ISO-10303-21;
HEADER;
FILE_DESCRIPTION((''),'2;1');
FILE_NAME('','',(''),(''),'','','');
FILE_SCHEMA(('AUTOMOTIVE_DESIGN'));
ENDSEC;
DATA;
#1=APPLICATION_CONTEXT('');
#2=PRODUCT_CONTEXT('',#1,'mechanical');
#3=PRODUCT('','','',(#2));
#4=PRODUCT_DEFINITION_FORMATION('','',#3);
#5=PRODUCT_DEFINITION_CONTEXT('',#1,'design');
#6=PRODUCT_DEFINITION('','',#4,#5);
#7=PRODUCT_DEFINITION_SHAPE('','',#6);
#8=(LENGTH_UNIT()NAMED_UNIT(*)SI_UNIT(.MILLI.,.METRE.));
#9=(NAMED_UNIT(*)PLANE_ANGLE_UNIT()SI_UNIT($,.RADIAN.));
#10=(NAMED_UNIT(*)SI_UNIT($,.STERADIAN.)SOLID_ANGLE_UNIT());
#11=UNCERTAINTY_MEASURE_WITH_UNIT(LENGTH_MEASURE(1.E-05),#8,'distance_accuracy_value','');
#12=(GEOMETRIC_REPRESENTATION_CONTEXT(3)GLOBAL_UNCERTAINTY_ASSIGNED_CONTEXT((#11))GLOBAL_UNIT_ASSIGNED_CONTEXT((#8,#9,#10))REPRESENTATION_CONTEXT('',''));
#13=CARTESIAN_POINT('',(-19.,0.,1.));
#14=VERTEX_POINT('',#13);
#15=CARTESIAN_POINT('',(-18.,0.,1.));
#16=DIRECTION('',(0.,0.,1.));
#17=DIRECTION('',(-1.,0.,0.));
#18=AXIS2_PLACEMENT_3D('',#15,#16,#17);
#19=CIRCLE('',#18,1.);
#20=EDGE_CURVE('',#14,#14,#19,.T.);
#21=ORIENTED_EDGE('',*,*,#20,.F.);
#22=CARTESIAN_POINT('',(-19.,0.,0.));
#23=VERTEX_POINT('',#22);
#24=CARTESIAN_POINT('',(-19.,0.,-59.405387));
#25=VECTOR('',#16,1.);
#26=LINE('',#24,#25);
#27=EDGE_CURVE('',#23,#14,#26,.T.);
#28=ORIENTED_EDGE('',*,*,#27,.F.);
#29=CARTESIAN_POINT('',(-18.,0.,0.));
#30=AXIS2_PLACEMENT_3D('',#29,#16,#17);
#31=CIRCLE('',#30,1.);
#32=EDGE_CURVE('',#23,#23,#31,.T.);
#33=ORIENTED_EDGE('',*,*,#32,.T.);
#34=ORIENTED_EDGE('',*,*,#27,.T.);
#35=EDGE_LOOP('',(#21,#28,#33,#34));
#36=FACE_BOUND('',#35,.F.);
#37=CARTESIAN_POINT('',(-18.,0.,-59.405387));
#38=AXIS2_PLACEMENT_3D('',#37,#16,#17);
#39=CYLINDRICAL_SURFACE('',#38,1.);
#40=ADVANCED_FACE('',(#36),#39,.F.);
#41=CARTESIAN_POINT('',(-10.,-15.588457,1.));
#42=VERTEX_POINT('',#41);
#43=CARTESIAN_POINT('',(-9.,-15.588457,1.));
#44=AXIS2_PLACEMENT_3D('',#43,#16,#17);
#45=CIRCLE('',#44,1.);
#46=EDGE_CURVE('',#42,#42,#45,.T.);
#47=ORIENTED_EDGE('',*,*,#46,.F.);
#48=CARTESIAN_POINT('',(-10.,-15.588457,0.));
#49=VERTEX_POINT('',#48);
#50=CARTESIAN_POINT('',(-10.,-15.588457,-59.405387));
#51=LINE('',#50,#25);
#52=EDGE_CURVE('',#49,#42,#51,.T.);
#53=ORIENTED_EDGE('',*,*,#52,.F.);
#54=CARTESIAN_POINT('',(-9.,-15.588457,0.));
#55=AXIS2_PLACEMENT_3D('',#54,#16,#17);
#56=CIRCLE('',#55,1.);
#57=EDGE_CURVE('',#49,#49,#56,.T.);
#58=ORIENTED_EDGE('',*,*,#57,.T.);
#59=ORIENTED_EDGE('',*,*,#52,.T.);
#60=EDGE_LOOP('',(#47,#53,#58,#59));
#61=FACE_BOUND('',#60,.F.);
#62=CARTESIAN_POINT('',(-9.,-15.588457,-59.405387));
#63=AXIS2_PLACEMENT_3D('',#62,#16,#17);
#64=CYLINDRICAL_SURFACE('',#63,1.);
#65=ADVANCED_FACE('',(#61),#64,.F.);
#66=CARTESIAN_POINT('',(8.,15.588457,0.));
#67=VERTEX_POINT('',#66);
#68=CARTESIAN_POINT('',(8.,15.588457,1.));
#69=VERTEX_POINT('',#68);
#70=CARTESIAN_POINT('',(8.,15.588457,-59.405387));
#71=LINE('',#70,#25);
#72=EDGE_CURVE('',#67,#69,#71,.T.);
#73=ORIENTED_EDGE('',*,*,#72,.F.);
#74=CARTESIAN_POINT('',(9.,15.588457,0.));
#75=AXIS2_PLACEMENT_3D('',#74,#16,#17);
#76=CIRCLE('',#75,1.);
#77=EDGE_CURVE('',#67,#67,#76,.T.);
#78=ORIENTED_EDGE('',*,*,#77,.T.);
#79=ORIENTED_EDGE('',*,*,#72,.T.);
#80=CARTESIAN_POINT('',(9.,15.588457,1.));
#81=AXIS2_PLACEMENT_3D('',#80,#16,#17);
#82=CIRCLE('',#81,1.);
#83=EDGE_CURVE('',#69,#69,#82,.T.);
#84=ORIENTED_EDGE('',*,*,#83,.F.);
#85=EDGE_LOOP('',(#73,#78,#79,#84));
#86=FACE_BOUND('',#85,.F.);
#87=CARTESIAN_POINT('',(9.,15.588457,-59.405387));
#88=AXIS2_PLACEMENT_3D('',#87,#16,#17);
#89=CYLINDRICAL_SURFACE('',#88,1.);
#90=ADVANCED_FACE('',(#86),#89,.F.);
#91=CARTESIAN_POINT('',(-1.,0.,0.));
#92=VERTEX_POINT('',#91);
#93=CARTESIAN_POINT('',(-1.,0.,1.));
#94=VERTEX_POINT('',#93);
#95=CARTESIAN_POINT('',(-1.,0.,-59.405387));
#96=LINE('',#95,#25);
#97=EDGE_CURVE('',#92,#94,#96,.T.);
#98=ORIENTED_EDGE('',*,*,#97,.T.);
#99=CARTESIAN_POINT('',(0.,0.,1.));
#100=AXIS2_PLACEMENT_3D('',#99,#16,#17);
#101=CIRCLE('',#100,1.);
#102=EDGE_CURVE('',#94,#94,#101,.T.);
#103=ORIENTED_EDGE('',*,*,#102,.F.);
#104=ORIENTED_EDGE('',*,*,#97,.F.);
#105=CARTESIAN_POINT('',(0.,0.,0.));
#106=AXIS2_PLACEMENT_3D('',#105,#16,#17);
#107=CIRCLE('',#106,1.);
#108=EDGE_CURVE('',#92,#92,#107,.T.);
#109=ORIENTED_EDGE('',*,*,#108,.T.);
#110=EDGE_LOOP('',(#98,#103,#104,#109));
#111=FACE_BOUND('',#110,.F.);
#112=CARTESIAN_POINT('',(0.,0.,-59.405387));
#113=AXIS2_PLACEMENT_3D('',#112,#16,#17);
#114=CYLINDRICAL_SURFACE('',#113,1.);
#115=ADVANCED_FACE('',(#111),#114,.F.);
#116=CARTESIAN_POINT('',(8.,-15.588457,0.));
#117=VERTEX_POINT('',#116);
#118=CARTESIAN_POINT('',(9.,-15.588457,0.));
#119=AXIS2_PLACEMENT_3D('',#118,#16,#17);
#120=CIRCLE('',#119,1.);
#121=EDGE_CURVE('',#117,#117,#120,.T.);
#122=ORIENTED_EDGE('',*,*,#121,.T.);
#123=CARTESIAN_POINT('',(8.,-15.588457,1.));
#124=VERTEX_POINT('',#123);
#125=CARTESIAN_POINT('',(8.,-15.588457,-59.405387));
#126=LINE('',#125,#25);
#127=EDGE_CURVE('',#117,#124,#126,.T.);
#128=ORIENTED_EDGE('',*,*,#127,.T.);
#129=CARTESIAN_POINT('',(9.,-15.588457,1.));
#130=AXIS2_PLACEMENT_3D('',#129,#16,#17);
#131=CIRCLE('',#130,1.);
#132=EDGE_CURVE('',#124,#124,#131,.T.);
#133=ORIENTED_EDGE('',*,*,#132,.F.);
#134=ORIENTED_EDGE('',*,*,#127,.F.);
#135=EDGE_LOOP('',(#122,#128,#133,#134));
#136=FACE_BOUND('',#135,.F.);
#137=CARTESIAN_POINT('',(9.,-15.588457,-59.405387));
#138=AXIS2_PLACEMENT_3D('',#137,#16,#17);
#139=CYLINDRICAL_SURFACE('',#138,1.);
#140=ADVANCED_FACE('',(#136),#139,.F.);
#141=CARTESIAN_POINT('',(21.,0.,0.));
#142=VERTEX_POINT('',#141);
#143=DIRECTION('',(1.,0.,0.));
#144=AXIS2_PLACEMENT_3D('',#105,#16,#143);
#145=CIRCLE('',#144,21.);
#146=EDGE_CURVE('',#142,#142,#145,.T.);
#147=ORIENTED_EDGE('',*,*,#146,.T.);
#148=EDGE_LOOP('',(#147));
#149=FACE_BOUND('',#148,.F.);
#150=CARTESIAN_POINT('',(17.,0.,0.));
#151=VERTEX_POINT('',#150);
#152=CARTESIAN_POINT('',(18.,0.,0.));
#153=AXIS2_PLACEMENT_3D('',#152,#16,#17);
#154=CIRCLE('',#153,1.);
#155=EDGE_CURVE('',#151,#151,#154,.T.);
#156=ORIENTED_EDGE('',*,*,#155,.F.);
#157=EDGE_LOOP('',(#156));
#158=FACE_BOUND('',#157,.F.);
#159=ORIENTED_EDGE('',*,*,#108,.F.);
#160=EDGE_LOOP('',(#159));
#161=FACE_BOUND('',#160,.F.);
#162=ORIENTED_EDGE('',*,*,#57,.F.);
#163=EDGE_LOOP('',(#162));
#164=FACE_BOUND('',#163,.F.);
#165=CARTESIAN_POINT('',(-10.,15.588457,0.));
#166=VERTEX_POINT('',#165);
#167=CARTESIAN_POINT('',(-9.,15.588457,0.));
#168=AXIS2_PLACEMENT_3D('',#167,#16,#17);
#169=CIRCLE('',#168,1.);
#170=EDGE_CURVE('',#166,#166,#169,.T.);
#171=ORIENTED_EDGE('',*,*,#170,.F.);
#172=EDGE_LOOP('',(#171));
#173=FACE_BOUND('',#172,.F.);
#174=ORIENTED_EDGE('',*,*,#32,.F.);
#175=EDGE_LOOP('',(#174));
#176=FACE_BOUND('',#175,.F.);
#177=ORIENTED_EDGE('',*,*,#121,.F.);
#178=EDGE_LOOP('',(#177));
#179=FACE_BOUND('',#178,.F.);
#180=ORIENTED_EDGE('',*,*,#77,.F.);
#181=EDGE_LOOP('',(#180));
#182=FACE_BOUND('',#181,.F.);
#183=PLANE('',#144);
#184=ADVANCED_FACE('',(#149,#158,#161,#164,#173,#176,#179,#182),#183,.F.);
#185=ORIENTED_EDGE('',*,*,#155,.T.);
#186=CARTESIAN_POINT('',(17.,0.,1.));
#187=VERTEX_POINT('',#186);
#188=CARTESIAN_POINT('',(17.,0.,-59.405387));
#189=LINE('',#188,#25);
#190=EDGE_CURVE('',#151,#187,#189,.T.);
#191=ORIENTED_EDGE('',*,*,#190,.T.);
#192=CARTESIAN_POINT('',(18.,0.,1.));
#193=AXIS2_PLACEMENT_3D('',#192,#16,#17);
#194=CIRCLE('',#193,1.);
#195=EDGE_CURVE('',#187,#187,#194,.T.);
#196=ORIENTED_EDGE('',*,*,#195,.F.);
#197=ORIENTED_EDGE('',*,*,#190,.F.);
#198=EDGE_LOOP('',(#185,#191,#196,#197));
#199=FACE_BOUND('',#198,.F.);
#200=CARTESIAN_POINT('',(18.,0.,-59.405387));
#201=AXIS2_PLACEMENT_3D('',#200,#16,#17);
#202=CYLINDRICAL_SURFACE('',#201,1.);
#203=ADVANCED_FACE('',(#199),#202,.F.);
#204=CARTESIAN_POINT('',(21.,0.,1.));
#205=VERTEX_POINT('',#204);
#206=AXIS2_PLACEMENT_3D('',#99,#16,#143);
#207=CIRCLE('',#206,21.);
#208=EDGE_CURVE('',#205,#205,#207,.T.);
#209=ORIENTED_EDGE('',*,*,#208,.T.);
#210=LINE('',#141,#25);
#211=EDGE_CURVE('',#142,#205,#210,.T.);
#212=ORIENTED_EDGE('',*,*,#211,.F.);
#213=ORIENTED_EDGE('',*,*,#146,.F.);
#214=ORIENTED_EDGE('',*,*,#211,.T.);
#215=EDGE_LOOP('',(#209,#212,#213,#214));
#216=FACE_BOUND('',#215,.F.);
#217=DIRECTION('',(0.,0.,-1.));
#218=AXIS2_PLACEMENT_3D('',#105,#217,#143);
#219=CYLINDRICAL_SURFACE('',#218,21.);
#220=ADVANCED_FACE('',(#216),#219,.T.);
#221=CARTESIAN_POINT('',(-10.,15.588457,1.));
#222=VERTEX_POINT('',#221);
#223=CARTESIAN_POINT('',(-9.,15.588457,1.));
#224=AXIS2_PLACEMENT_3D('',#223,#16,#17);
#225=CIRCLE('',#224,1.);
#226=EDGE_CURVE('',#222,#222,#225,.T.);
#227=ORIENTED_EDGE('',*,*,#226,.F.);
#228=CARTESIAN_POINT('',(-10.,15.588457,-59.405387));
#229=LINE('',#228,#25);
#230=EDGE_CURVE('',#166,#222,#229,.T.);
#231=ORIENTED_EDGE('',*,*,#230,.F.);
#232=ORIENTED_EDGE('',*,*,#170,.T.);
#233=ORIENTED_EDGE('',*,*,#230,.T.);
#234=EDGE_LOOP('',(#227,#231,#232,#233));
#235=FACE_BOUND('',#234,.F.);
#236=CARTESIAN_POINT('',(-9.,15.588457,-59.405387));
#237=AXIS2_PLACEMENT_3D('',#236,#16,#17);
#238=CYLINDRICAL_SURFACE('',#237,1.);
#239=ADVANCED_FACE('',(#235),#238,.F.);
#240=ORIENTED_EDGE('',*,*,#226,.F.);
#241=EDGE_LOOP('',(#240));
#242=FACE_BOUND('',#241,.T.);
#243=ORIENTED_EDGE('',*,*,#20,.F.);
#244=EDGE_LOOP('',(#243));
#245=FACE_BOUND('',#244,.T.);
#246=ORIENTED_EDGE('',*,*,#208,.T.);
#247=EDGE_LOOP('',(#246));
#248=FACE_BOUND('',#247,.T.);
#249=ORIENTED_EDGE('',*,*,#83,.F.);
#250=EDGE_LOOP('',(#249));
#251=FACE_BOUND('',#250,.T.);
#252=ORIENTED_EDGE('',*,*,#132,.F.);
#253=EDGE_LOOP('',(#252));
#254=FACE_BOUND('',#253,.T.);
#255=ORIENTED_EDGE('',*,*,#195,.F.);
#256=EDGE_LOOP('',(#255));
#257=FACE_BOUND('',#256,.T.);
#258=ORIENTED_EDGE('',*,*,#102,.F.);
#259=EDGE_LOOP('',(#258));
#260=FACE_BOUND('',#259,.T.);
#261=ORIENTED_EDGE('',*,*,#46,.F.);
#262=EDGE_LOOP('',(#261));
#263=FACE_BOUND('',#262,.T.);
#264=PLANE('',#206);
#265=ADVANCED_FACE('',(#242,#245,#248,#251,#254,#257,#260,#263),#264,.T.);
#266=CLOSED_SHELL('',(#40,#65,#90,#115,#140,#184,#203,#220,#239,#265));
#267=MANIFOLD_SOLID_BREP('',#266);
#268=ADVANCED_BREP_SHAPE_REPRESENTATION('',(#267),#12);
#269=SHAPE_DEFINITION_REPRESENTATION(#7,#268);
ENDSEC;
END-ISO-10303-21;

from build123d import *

# Parameters (mm, degrees)
F0_R     = 21
F1_DEPTH = 1
F2_D     = 2


# Not quite as in the source:
# - a feature names something its author has since deleted; it is built from what else it names


with BuildPart() as f1:
    # F0 (on Top) → F1 (new body)
    with BuildSketch(Plane.XY):
        Circle(F0_R)
    extrude(amount=F1_DEPTH)

    # F2 (through all)
    with Locations(Plane(origin=(0, 0, 0), x_dir=(1, 0, 0), z_dir=(0, 0, -1))):
        with Locations((-18, 0), (18, 0), (0, 0), (-9, 15.5884572681), (9, 15.5884572681), (9, -15.5884572681), (-9, -15.5884572681)):
            Hole(F2_D / 2)


solid = f1.part
